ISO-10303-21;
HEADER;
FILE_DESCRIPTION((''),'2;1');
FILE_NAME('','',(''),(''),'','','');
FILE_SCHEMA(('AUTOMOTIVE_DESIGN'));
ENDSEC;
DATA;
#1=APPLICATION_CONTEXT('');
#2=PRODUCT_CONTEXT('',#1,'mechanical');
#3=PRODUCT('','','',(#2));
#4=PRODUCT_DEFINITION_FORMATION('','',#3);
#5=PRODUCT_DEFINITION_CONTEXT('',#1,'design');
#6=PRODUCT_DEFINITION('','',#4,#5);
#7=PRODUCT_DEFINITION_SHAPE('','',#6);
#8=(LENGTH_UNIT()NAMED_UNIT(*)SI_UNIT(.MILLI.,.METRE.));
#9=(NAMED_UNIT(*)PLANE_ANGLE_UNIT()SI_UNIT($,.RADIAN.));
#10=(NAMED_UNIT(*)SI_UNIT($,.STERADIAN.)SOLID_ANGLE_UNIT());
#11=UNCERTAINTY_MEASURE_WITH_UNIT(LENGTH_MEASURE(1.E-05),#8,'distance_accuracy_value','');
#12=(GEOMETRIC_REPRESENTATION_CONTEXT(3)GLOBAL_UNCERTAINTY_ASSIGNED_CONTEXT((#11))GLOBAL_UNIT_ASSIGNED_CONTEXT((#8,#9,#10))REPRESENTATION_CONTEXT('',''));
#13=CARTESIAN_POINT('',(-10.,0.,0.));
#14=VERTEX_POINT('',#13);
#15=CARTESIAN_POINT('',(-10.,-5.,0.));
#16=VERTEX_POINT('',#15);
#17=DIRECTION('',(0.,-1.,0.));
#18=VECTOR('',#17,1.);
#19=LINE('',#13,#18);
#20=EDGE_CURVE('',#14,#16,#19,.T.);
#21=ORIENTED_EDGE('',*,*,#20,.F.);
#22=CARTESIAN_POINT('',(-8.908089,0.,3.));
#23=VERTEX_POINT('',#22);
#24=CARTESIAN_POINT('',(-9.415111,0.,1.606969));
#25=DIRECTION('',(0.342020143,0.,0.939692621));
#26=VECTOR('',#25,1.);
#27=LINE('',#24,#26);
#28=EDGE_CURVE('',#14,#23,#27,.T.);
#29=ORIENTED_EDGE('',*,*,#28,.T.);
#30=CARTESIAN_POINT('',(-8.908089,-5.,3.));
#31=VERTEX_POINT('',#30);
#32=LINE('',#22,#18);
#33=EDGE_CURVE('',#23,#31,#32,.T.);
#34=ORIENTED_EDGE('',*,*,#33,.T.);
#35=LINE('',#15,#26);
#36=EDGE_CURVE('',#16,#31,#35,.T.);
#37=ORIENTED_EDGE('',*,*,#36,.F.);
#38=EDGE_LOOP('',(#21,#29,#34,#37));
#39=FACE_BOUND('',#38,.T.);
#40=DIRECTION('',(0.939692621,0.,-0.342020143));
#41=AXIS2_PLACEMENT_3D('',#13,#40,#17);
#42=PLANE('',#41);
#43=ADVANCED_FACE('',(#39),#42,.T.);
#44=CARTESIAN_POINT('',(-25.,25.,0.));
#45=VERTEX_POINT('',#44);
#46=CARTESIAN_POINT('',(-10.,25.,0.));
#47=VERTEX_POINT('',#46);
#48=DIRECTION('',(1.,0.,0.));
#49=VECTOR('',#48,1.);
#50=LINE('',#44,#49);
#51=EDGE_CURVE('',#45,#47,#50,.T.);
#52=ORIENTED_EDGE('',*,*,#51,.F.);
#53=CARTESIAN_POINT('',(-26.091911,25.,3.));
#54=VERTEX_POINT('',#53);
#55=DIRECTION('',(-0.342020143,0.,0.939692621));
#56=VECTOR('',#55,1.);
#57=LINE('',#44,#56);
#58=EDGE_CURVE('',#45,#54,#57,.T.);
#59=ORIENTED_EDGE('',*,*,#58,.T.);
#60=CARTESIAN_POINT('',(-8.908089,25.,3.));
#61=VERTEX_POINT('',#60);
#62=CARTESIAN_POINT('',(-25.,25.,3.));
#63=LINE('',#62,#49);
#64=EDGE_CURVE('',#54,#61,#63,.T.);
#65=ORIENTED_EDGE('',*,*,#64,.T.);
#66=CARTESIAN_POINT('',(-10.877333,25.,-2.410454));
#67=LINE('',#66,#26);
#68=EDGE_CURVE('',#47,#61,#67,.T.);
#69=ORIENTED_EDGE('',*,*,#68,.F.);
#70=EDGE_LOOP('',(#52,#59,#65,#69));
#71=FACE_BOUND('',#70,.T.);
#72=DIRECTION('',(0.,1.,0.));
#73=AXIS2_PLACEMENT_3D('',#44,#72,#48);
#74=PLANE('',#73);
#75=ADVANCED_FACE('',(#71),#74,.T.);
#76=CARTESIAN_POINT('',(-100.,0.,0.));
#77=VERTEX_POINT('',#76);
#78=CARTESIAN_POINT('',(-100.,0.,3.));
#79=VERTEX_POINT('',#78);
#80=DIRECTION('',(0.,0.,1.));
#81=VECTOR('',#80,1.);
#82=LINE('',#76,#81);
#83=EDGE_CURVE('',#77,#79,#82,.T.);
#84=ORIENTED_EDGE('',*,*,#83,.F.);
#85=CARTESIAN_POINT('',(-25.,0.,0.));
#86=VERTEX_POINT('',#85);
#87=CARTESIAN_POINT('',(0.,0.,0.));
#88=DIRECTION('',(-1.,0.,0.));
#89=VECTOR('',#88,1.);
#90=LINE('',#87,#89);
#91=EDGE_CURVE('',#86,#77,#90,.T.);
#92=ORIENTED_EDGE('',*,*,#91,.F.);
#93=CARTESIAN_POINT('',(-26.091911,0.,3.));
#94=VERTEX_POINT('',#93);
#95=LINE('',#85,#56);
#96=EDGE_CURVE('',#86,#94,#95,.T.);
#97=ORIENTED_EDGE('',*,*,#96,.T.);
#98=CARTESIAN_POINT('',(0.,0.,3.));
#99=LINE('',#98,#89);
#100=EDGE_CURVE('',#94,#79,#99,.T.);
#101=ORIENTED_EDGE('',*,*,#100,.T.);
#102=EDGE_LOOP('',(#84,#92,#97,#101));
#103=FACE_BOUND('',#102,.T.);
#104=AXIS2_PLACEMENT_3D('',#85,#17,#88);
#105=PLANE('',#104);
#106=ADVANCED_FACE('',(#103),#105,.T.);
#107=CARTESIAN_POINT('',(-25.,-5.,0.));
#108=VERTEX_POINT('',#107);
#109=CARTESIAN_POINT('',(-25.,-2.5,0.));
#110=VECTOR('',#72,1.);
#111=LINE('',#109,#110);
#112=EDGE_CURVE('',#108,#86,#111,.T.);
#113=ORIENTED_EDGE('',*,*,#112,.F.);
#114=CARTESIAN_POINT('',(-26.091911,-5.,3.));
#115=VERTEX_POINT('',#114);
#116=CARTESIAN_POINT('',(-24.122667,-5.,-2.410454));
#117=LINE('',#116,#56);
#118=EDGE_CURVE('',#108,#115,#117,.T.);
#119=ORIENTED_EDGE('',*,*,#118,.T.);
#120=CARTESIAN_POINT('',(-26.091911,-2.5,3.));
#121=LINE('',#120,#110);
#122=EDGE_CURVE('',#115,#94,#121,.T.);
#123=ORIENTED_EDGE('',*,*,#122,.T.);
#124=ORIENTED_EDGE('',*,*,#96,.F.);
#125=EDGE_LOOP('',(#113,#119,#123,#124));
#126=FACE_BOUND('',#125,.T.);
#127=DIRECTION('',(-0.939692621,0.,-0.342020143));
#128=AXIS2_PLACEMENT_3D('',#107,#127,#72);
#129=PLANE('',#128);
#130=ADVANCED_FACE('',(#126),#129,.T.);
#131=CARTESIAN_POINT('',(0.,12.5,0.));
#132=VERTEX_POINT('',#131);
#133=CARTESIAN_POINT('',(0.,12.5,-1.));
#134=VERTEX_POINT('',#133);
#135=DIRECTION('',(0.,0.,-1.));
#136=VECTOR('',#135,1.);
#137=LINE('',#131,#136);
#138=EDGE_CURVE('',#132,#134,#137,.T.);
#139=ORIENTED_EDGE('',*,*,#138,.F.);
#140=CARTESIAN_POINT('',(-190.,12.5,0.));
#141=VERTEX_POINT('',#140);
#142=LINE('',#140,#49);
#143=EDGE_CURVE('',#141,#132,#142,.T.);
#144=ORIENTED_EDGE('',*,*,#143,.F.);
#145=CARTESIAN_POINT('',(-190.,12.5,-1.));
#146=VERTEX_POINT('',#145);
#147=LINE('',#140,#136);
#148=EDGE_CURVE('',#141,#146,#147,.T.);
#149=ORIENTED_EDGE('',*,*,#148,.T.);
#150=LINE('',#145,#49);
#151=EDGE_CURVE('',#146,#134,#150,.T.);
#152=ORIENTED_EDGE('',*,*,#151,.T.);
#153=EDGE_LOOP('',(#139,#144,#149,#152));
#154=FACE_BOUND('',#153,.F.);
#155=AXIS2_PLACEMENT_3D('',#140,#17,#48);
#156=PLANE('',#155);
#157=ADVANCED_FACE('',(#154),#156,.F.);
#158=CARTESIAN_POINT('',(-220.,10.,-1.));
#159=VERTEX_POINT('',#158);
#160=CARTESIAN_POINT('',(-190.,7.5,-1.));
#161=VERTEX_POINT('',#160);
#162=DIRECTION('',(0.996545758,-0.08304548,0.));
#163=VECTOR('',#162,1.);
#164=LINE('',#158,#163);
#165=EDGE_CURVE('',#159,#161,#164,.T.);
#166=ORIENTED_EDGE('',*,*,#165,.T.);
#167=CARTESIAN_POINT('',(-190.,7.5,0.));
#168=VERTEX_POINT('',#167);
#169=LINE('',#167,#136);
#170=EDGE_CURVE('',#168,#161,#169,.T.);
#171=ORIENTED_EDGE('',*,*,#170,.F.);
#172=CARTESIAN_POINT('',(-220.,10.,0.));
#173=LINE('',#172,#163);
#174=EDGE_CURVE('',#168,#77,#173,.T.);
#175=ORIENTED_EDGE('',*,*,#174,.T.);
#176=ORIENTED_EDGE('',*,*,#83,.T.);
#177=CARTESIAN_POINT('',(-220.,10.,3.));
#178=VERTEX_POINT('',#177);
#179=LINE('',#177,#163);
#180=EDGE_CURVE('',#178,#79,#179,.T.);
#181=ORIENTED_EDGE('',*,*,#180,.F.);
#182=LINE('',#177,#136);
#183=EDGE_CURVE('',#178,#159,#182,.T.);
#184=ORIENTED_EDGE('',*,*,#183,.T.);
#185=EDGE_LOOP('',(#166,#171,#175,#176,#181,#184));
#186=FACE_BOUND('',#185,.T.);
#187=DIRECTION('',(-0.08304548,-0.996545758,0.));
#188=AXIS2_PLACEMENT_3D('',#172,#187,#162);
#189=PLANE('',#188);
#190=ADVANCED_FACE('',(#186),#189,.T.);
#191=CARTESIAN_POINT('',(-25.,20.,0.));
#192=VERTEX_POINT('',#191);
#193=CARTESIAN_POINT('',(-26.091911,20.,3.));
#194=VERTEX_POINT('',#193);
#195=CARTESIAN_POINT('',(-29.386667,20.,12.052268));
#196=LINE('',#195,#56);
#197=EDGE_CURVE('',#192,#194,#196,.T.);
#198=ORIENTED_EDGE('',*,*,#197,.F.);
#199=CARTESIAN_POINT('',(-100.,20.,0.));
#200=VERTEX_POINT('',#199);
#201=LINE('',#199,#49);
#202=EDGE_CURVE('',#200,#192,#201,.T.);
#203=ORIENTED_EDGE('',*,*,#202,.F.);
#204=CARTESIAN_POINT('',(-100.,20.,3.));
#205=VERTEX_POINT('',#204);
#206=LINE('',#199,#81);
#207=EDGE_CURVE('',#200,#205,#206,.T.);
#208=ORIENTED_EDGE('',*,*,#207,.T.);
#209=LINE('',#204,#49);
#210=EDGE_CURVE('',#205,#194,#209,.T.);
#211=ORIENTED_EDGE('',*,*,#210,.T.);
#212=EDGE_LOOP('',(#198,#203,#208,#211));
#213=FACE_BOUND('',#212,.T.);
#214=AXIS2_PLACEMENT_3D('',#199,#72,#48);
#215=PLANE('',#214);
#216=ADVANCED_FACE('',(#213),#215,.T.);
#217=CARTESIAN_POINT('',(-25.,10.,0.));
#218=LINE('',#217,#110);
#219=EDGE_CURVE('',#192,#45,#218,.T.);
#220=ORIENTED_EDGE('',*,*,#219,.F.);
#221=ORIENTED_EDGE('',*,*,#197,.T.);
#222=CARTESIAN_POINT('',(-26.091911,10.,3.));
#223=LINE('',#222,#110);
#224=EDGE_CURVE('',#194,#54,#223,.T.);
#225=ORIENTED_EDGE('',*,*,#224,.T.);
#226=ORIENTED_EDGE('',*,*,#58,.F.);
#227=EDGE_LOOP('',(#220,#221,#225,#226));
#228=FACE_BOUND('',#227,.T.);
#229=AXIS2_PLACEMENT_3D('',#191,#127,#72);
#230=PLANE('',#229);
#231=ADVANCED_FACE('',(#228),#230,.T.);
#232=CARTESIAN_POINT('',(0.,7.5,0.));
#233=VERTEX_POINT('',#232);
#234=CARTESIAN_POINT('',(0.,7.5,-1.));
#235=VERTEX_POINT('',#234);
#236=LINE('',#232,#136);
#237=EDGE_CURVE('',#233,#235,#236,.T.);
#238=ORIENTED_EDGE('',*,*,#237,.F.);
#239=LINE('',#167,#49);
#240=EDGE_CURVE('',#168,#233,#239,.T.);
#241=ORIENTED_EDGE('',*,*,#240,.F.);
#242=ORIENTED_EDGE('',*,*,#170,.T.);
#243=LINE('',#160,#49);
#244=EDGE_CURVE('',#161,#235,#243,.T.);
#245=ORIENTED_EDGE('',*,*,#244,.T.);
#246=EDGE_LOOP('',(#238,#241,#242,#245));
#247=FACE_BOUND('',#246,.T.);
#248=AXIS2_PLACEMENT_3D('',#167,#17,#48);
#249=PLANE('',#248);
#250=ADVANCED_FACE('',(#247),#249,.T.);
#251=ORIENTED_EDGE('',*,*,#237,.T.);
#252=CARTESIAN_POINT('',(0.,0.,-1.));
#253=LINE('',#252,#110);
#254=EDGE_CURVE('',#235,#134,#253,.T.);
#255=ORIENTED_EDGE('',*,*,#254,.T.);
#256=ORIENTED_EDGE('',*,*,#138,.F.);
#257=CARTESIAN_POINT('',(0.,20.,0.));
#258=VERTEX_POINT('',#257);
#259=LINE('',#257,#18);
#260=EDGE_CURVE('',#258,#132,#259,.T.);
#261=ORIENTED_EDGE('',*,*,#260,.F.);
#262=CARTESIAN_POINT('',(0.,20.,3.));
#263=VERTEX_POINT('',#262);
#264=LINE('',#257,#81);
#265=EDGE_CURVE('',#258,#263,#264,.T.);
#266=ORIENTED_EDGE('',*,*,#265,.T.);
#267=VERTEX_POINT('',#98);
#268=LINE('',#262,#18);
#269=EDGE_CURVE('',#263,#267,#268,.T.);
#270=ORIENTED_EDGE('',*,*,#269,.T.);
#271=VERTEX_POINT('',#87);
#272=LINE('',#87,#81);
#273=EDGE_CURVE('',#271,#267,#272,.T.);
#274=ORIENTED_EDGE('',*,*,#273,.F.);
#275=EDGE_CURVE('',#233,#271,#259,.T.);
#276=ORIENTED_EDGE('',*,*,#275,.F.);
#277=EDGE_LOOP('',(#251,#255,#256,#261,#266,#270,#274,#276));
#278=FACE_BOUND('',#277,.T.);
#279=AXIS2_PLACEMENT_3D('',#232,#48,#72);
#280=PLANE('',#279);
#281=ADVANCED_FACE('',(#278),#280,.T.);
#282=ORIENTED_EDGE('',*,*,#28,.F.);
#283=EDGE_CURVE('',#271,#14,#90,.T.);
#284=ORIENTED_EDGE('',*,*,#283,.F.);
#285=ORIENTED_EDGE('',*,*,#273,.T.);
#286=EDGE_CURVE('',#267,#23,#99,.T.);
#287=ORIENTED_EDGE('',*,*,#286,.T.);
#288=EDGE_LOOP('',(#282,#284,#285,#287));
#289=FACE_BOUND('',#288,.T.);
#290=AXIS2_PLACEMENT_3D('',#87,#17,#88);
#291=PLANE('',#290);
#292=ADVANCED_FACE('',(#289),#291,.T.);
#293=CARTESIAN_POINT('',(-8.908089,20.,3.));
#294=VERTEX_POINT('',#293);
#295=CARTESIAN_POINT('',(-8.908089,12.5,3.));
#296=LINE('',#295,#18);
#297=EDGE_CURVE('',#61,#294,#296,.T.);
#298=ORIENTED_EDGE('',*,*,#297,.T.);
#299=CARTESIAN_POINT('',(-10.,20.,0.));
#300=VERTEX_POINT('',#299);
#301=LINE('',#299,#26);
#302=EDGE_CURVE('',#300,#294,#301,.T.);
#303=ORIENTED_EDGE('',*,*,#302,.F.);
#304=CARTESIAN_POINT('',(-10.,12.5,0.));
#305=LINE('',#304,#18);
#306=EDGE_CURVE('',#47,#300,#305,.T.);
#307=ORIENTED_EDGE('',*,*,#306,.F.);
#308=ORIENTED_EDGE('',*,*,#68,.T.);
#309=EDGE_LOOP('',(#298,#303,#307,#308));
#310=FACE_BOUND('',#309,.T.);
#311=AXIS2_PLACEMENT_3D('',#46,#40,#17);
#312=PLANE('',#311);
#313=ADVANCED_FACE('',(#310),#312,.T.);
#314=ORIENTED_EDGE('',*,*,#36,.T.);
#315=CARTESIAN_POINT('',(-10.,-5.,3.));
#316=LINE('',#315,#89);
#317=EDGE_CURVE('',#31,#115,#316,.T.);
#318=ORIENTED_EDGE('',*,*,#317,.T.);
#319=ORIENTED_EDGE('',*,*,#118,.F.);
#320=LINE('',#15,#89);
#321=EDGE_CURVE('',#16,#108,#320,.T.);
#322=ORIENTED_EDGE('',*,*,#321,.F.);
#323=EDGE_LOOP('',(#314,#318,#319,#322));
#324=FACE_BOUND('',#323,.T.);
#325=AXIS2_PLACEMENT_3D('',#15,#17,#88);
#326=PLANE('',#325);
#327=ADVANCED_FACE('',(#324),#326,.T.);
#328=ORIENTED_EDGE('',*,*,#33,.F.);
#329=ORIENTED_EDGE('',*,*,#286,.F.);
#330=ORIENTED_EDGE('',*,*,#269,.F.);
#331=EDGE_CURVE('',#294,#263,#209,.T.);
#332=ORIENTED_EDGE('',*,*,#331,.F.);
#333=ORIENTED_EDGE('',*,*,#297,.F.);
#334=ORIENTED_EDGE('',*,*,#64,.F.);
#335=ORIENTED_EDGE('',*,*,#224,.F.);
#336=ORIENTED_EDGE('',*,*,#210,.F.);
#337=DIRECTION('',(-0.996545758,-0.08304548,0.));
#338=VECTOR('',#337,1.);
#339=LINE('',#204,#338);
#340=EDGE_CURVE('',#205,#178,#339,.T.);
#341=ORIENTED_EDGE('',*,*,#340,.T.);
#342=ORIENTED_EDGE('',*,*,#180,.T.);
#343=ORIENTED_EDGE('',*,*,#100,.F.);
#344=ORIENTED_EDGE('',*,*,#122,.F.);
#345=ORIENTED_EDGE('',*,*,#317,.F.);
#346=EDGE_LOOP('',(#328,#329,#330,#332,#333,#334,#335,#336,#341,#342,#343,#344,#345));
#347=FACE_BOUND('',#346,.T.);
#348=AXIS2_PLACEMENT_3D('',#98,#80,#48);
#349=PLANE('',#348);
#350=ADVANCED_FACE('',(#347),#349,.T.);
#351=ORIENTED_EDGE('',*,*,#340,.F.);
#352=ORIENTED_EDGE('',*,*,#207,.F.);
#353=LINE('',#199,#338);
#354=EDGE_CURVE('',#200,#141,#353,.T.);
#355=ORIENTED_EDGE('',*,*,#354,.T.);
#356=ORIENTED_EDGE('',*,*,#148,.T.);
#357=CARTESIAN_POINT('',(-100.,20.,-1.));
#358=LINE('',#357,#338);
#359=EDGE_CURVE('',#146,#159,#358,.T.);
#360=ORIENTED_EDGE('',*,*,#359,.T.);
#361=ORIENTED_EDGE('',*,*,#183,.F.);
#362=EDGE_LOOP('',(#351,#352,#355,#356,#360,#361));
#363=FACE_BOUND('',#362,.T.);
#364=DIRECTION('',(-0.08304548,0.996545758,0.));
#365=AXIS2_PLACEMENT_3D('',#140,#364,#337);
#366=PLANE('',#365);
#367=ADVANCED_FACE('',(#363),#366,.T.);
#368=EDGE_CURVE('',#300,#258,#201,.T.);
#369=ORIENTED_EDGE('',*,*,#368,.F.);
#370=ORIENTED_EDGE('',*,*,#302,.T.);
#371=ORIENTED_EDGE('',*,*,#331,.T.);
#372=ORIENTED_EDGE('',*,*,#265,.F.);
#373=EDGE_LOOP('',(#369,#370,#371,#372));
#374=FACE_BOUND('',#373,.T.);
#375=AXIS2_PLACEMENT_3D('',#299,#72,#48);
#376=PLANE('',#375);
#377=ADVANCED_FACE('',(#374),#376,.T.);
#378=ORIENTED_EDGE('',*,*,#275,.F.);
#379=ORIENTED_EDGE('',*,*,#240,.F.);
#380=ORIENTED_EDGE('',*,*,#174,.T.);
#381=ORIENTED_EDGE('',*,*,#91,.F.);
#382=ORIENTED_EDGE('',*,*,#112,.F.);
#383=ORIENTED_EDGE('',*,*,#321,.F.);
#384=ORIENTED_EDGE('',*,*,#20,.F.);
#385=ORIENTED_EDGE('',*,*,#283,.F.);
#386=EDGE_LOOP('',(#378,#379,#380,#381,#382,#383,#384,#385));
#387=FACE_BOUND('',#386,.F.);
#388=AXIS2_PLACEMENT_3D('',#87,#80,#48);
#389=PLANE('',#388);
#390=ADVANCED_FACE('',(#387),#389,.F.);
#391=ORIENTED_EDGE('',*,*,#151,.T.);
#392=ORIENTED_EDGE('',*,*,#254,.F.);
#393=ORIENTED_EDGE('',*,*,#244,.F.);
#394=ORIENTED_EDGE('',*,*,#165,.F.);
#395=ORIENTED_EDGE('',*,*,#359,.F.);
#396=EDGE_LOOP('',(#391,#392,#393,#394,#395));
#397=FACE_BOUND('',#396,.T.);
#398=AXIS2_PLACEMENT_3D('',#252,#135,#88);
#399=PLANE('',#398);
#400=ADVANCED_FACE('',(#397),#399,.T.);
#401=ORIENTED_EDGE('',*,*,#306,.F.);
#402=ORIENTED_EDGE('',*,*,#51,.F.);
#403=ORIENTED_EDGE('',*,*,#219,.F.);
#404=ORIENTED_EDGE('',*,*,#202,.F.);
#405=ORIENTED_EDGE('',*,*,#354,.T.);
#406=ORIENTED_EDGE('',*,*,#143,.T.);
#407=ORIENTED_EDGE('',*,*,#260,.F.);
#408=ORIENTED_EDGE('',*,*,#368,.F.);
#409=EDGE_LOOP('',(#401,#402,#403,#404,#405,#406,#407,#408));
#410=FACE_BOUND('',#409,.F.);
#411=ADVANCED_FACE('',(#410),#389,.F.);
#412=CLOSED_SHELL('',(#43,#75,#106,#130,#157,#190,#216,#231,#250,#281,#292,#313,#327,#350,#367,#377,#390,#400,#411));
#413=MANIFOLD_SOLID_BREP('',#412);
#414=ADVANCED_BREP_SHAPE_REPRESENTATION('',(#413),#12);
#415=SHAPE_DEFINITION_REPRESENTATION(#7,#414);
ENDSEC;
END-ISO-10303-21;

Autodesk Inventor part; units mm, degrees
ref_plane "YZ Plane" through (0, 0, 0) normal (1, 0, 0) x (0, 1, 0)
ref_plane "XZ Plane" through (0, 0, 0) normal (0, 1, 0) x (-1, 0, 0)
ref_plane "XY Plane" through (0, 0, 0) normal (0, 0, 1) x (1, 0, 0)
sketch "Sketch1" plane through (0, 0, 0) normal (0, 0, 1) x (1, 0, 0)
  line L0 (0, 0) -> (-100, 0)
  line L1 (-100, 20) -> (0, 20)
  line L2 (0, 20) -> (0, 0)
  line L3 (-100, 20) -> (-220, 10)
  line L4 (-220, 10) -> (-100, 0)
  line L5 (-25, 25) -> (-10, 25)
  line L6 (-10, 25) -> (-10, 20)
  line L7 (-10, 20) -> (-25, 20)
  line L8 (-25, 20) -> (-25, 25)
  line L9 (-25, 0) -> (-10, 0)
  line L10 (-10, 0) -> (-10, -5)
  line L11 (-10, -5) -> (-25, -5)
  line L12 (-25, -5) -> (-25, 0)
  dimension "d0" = 100
  dimension "d1" = 20
  dimension "d2" = 220
  dimension "d3" = 10
  dimension "d4" = 15
  dimension "d5" = 5
  dimension "d6" = 10
extrude "Cuerpo" add sketch "Sketch1" along normal blind 3
sketch "Sketch2" plane through (0, 0, 0) normal (0, 0, -1) x (-1, 0, 0)
  line L0 (0, 0) -> (0, 20) projected
  line L1 (100, 20) -> (220, 10) projected
  line L2 (220, 10) -> (100, 0) projected
  line L3 (190, 7.5) -> (0, 7.5)
  line L4 (190, 12.5) -> (0, 12.5)
  dimension "d9" = 5
extrude "Rail" add sketch "Sketch2" along normal blind 1
draft "FaceDraft1" angle -20 pull direction (0, 0, 1) faces at (-25, -1.6667, 1) fixed edges at (-25, -2.5, 0)
draft "FaceDraft2" angle -20 pull direction (0, 0, 1) faces at (-10, -3.3333, 1) fixed edges at (-10, -2.5, 0)
draft "FaceDraft3" angle -20 pull direction (0, 0, 1) faces at (-10, 21.6667, 1) fixed edges at (-10, 22.5, 0)
draft "FaceDraft4" angle -20 pull direction (0, 0, 1) faces at (-25, 23.3333, 1) fixed edges at (-25, 22.5, 0)
equation "\"d0\" = hoja_cuerpo_largo"
equation "\"d1\" = hoja_ancho"
equation "\"d2\" = hoja_largo"
equation "\"d3\" = hoja_diente_separacion"
equation "\"d4\" = hoja_diente_largo"
equation "\"d5\" = hoja_diente_ancho"
equation "\"d6\" = d3"
equation "\"d7\" = hoja_grosor"
equation "\"d9\" = hoja_rail_ancho"
equation "\"d10\" = hoja_rail_alto"
equation "\"d12\" = tirador_diente_agarre"
equation "\"d13\" = tirador_diente_agarre"
equation "\"d14\" = tirador_diente_agarre"
equation "\"d15\" = tirador_diente_agarre"
equation "\"hoja_cuerpo_largo\" = 100"
equation "\"hoja_ancho\" = 20"
equation "\"hoja_largo\" = 220"
equation "\"hoja_diente_separacion\" = 10"
equation "\"hoja_diente_largo\" = 15"
equation "\"hoja_diente_ancho\" = 5"
equation "\"hoja_grosor\" = 3"
equation "\"hoja_rail_ancho\" = 5"
equation "\"hoja_rail_alto\" = 1"
equation "\"tirador_diente_agarre\" = -20deg"
properties part number "Hoja"
